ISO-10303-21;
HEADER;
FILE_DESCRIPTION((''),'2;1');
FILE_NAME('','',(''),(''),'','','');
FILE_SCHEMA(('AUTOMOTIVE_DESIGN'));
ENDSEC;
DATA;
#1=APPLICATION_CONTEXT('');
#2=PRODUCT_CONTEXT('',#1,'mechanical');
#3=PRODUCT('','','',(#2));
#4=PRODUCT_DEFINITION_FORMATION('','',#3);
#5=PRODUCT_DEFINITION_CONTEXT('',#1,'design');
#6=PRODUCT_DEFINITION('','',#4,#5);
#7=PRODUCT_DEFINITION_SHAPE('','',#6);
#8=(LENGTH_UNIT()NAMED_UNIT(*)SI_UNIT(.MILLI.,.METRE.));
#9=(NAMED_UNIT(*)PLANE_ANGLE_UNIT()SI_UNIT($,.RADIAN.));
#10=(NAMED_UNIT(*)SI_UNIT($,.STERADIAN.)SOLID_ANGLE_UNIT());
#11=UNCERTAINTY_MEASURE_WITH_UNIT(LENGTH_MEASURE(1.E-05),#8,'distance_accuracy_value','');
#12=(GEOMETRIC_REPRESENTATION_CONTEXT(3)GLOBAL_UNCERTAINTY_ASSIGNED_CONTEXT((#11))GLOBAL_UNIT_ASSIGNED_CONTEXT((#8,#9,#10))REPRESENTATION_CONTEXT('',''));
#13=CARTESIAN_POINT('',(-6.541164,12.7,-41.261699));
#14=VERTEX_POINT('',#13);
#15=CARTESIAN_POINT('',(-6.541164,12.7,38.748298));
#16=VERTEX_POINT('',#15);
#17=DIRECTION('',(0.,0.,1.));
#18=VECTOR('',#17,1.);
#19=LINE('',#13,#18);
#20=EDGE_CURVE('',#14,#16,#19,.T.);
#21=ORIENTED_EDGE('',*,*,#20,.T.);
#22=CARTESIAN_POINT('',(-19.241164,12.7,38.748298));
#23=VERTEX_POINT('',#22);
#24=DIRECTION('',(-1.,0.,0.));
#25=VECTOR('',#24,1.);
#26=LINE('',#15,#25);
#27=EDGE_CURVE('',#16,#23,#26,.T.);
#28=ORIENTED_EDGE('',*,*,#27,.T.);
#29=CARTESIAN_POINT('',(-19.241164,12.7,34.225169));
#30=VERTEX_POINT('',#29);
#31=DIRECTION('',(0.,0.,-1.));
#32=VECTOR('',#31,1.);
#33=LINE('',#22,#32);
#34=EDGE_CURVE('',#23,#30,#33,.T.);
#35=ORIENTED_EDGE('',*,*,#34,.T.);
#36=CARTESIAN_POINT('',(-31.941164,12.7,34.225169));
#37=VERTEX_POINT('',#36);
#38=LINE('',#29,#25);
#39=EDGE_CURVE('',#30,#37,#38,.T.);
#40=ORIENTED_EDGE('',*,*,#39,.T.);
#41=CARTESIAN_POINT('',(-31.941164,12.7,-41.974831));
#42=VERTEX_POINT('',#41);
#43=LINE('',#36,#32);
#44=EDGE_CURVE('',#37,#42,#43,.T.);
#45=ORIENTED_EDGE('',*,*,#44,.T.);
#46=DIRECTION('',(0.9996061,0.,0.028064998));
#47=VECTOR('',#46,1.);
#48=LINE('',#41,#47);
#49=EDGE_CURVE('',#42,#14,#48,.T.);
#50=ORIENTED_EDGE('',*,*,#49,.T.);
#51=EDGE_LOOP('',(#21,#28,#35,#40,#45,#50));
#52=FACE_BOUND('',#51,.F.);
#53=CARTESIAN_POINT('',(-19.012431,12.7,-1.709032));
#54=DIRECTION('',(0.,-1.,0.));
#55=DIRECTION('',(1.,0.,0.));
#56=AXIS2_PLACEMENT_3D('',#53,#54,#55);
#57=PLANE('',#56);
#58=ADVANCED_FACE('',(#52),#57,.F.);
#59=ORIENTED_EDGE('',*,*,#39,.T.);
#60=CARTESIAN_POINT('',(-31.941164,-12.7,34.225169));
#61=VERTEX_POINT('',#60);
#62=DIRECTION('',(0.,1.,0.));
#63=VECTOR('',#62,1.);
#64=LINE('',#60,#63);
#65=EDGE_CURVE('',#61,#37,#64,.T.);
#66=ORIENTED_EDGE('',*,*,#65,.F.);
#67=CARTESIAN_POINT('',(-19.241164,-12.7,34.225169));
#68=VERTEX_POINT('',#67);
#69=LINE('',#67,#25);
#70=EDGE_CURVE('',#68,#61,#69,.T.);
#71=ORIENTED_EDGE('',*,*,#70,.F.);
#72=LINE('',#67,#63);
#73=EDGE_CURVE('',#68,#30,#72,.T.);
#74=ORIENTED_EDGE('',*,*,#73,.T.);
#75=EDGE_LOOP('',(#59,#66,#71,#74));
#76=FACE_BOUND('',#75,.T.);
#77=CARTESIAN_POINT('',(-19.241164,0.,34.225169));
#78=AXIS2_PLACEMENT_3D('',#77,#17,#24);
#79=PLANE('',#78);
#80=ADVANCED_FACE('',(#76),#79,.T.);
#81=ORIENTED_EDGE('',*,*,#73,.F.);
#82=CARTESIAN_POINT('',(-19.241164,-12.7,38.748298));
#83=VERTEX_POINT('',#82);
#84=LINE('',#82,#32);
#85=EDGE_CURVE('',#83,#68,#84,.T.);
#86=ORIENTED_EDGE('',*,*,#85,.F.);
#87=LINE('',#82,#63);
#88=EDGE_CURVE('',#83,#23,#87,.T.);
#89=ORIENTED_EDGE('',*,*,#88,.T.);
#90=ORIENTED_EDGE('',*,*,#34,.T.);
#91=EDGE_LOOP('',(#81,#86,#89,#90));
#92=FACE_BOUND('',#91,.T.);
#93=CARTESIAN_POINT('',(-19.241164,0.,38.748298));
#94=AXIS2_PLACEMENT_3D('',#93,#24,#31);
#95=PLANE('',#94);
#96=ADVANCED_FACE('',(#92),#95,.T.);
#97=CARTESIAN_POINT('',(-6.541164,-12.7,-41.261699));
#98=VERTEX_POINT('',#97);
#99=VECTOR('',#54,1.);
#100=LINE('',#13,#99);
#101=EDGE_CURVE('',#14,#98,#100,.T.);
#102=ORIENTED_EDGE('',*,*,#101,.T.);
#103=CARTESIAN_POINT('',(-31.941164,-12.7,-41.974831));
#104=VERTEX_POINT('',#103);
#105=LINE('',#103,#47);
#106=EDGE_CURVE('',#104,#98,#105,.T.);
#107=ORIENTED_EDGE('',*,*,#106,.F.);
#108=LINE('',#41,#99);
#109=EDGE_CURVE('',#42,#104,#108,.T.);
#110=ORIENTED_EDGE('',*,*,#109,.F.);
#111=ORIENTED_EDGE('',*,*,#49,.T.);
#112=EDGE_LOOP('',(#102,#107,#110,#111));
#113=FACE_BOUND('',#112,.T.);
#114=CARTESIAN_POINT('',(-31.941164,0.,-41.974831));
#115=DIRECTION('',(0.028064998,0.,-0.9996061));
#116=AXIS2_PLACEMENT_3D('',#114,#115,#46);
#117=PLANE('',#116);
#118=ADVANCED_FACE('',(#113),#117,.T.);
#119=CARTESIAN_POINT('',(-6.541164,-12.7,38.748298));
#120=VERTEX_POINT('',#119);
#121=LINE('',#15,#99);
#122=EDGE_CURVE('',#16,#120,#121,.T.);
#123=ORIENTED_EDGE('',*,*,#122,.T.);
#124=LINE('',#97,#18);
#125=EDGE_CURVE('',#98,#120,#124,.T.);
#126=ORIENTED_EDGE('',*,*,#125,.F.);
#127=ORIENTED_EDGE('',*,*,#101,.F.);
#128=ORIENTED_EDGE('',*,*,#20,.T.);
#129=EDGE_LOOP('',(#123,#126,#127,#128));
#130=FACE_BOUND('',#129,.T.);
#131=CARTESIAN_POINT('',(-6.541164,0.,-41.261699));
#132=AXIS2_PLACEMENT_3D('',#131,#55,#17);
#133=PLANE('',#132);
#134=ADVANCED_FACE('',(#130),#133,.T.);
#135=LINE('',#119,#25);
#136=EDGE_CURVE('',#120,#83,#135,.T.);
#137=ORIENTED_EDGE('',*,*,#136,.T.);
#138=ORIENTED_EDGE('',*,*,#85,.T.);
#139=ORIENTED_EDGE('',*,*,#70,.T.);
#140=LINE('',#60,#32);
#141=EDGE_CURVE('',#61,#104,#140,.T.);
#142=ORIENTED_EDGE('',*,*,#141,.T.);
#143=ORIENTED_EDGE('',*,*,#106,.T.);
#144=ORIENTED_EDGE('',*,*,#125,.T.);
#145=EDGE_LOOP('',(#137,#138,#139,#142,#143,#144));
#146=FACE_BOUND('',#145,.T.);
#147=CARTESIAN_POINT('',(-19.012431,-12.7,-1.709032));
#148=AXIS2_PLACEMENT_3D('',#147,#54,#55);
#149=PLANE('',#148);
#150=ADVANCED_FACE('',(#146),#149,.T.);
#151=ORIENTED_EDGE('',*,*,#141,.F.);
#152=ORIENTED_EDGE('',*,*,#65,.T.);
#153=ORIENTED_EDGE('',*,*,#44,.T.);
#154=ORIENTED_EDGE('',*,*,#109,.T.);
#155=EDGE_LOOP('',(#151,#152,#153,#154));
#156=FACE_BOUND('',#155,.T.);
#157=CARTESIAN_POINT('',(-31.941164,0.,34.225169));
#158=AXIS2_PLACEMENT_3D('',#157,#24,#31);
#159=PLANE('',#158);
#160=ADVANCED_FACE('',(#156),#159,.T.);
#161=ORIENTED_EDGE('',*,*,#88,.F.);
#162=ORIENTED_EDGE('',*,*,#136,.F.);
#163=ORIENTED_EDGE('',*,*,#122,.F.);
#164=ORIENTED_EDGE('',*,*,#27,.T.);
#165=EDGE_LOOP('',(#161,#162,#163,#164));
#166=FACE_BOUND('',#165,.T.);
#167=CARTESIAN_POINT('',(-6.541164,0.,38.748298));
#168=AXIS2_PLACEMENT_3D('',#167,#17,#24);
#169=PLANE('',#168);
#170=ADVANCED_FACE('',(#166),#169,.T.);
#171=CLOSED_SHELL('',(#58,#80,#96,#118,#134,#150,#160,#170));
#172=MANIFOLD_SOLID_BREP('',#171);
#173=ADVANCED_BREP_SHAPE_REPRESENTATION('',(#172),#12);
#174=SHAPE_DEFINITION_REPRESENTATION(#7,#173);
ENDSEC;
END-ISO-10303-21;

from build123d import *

# Parameters (mm, degrees)
F1_DEPTH = 12.7


# Not quite as in the source:
# - the program builds the solid bodies; features that only make, move or delete a surface that nothing else refers to are left out


with BuildPart() as f1:
    # F0 (on Front) → F1 (new body, symmetric)
    with BuildSketch(Plane.XZ):
        Polygon((-31.9411642849, 34.2251690984), (-31.9411642849, -41.9748309016), (-6.5411642849, -41.2616990507), (-6.5411642849, 38.7482978404), (-19.2411642849, 38.7482978404), (-19.2411642849, 34.2251690984), align=None)
    extrude(amount=F1_DEPTH, both=True)


solid = f1.part
